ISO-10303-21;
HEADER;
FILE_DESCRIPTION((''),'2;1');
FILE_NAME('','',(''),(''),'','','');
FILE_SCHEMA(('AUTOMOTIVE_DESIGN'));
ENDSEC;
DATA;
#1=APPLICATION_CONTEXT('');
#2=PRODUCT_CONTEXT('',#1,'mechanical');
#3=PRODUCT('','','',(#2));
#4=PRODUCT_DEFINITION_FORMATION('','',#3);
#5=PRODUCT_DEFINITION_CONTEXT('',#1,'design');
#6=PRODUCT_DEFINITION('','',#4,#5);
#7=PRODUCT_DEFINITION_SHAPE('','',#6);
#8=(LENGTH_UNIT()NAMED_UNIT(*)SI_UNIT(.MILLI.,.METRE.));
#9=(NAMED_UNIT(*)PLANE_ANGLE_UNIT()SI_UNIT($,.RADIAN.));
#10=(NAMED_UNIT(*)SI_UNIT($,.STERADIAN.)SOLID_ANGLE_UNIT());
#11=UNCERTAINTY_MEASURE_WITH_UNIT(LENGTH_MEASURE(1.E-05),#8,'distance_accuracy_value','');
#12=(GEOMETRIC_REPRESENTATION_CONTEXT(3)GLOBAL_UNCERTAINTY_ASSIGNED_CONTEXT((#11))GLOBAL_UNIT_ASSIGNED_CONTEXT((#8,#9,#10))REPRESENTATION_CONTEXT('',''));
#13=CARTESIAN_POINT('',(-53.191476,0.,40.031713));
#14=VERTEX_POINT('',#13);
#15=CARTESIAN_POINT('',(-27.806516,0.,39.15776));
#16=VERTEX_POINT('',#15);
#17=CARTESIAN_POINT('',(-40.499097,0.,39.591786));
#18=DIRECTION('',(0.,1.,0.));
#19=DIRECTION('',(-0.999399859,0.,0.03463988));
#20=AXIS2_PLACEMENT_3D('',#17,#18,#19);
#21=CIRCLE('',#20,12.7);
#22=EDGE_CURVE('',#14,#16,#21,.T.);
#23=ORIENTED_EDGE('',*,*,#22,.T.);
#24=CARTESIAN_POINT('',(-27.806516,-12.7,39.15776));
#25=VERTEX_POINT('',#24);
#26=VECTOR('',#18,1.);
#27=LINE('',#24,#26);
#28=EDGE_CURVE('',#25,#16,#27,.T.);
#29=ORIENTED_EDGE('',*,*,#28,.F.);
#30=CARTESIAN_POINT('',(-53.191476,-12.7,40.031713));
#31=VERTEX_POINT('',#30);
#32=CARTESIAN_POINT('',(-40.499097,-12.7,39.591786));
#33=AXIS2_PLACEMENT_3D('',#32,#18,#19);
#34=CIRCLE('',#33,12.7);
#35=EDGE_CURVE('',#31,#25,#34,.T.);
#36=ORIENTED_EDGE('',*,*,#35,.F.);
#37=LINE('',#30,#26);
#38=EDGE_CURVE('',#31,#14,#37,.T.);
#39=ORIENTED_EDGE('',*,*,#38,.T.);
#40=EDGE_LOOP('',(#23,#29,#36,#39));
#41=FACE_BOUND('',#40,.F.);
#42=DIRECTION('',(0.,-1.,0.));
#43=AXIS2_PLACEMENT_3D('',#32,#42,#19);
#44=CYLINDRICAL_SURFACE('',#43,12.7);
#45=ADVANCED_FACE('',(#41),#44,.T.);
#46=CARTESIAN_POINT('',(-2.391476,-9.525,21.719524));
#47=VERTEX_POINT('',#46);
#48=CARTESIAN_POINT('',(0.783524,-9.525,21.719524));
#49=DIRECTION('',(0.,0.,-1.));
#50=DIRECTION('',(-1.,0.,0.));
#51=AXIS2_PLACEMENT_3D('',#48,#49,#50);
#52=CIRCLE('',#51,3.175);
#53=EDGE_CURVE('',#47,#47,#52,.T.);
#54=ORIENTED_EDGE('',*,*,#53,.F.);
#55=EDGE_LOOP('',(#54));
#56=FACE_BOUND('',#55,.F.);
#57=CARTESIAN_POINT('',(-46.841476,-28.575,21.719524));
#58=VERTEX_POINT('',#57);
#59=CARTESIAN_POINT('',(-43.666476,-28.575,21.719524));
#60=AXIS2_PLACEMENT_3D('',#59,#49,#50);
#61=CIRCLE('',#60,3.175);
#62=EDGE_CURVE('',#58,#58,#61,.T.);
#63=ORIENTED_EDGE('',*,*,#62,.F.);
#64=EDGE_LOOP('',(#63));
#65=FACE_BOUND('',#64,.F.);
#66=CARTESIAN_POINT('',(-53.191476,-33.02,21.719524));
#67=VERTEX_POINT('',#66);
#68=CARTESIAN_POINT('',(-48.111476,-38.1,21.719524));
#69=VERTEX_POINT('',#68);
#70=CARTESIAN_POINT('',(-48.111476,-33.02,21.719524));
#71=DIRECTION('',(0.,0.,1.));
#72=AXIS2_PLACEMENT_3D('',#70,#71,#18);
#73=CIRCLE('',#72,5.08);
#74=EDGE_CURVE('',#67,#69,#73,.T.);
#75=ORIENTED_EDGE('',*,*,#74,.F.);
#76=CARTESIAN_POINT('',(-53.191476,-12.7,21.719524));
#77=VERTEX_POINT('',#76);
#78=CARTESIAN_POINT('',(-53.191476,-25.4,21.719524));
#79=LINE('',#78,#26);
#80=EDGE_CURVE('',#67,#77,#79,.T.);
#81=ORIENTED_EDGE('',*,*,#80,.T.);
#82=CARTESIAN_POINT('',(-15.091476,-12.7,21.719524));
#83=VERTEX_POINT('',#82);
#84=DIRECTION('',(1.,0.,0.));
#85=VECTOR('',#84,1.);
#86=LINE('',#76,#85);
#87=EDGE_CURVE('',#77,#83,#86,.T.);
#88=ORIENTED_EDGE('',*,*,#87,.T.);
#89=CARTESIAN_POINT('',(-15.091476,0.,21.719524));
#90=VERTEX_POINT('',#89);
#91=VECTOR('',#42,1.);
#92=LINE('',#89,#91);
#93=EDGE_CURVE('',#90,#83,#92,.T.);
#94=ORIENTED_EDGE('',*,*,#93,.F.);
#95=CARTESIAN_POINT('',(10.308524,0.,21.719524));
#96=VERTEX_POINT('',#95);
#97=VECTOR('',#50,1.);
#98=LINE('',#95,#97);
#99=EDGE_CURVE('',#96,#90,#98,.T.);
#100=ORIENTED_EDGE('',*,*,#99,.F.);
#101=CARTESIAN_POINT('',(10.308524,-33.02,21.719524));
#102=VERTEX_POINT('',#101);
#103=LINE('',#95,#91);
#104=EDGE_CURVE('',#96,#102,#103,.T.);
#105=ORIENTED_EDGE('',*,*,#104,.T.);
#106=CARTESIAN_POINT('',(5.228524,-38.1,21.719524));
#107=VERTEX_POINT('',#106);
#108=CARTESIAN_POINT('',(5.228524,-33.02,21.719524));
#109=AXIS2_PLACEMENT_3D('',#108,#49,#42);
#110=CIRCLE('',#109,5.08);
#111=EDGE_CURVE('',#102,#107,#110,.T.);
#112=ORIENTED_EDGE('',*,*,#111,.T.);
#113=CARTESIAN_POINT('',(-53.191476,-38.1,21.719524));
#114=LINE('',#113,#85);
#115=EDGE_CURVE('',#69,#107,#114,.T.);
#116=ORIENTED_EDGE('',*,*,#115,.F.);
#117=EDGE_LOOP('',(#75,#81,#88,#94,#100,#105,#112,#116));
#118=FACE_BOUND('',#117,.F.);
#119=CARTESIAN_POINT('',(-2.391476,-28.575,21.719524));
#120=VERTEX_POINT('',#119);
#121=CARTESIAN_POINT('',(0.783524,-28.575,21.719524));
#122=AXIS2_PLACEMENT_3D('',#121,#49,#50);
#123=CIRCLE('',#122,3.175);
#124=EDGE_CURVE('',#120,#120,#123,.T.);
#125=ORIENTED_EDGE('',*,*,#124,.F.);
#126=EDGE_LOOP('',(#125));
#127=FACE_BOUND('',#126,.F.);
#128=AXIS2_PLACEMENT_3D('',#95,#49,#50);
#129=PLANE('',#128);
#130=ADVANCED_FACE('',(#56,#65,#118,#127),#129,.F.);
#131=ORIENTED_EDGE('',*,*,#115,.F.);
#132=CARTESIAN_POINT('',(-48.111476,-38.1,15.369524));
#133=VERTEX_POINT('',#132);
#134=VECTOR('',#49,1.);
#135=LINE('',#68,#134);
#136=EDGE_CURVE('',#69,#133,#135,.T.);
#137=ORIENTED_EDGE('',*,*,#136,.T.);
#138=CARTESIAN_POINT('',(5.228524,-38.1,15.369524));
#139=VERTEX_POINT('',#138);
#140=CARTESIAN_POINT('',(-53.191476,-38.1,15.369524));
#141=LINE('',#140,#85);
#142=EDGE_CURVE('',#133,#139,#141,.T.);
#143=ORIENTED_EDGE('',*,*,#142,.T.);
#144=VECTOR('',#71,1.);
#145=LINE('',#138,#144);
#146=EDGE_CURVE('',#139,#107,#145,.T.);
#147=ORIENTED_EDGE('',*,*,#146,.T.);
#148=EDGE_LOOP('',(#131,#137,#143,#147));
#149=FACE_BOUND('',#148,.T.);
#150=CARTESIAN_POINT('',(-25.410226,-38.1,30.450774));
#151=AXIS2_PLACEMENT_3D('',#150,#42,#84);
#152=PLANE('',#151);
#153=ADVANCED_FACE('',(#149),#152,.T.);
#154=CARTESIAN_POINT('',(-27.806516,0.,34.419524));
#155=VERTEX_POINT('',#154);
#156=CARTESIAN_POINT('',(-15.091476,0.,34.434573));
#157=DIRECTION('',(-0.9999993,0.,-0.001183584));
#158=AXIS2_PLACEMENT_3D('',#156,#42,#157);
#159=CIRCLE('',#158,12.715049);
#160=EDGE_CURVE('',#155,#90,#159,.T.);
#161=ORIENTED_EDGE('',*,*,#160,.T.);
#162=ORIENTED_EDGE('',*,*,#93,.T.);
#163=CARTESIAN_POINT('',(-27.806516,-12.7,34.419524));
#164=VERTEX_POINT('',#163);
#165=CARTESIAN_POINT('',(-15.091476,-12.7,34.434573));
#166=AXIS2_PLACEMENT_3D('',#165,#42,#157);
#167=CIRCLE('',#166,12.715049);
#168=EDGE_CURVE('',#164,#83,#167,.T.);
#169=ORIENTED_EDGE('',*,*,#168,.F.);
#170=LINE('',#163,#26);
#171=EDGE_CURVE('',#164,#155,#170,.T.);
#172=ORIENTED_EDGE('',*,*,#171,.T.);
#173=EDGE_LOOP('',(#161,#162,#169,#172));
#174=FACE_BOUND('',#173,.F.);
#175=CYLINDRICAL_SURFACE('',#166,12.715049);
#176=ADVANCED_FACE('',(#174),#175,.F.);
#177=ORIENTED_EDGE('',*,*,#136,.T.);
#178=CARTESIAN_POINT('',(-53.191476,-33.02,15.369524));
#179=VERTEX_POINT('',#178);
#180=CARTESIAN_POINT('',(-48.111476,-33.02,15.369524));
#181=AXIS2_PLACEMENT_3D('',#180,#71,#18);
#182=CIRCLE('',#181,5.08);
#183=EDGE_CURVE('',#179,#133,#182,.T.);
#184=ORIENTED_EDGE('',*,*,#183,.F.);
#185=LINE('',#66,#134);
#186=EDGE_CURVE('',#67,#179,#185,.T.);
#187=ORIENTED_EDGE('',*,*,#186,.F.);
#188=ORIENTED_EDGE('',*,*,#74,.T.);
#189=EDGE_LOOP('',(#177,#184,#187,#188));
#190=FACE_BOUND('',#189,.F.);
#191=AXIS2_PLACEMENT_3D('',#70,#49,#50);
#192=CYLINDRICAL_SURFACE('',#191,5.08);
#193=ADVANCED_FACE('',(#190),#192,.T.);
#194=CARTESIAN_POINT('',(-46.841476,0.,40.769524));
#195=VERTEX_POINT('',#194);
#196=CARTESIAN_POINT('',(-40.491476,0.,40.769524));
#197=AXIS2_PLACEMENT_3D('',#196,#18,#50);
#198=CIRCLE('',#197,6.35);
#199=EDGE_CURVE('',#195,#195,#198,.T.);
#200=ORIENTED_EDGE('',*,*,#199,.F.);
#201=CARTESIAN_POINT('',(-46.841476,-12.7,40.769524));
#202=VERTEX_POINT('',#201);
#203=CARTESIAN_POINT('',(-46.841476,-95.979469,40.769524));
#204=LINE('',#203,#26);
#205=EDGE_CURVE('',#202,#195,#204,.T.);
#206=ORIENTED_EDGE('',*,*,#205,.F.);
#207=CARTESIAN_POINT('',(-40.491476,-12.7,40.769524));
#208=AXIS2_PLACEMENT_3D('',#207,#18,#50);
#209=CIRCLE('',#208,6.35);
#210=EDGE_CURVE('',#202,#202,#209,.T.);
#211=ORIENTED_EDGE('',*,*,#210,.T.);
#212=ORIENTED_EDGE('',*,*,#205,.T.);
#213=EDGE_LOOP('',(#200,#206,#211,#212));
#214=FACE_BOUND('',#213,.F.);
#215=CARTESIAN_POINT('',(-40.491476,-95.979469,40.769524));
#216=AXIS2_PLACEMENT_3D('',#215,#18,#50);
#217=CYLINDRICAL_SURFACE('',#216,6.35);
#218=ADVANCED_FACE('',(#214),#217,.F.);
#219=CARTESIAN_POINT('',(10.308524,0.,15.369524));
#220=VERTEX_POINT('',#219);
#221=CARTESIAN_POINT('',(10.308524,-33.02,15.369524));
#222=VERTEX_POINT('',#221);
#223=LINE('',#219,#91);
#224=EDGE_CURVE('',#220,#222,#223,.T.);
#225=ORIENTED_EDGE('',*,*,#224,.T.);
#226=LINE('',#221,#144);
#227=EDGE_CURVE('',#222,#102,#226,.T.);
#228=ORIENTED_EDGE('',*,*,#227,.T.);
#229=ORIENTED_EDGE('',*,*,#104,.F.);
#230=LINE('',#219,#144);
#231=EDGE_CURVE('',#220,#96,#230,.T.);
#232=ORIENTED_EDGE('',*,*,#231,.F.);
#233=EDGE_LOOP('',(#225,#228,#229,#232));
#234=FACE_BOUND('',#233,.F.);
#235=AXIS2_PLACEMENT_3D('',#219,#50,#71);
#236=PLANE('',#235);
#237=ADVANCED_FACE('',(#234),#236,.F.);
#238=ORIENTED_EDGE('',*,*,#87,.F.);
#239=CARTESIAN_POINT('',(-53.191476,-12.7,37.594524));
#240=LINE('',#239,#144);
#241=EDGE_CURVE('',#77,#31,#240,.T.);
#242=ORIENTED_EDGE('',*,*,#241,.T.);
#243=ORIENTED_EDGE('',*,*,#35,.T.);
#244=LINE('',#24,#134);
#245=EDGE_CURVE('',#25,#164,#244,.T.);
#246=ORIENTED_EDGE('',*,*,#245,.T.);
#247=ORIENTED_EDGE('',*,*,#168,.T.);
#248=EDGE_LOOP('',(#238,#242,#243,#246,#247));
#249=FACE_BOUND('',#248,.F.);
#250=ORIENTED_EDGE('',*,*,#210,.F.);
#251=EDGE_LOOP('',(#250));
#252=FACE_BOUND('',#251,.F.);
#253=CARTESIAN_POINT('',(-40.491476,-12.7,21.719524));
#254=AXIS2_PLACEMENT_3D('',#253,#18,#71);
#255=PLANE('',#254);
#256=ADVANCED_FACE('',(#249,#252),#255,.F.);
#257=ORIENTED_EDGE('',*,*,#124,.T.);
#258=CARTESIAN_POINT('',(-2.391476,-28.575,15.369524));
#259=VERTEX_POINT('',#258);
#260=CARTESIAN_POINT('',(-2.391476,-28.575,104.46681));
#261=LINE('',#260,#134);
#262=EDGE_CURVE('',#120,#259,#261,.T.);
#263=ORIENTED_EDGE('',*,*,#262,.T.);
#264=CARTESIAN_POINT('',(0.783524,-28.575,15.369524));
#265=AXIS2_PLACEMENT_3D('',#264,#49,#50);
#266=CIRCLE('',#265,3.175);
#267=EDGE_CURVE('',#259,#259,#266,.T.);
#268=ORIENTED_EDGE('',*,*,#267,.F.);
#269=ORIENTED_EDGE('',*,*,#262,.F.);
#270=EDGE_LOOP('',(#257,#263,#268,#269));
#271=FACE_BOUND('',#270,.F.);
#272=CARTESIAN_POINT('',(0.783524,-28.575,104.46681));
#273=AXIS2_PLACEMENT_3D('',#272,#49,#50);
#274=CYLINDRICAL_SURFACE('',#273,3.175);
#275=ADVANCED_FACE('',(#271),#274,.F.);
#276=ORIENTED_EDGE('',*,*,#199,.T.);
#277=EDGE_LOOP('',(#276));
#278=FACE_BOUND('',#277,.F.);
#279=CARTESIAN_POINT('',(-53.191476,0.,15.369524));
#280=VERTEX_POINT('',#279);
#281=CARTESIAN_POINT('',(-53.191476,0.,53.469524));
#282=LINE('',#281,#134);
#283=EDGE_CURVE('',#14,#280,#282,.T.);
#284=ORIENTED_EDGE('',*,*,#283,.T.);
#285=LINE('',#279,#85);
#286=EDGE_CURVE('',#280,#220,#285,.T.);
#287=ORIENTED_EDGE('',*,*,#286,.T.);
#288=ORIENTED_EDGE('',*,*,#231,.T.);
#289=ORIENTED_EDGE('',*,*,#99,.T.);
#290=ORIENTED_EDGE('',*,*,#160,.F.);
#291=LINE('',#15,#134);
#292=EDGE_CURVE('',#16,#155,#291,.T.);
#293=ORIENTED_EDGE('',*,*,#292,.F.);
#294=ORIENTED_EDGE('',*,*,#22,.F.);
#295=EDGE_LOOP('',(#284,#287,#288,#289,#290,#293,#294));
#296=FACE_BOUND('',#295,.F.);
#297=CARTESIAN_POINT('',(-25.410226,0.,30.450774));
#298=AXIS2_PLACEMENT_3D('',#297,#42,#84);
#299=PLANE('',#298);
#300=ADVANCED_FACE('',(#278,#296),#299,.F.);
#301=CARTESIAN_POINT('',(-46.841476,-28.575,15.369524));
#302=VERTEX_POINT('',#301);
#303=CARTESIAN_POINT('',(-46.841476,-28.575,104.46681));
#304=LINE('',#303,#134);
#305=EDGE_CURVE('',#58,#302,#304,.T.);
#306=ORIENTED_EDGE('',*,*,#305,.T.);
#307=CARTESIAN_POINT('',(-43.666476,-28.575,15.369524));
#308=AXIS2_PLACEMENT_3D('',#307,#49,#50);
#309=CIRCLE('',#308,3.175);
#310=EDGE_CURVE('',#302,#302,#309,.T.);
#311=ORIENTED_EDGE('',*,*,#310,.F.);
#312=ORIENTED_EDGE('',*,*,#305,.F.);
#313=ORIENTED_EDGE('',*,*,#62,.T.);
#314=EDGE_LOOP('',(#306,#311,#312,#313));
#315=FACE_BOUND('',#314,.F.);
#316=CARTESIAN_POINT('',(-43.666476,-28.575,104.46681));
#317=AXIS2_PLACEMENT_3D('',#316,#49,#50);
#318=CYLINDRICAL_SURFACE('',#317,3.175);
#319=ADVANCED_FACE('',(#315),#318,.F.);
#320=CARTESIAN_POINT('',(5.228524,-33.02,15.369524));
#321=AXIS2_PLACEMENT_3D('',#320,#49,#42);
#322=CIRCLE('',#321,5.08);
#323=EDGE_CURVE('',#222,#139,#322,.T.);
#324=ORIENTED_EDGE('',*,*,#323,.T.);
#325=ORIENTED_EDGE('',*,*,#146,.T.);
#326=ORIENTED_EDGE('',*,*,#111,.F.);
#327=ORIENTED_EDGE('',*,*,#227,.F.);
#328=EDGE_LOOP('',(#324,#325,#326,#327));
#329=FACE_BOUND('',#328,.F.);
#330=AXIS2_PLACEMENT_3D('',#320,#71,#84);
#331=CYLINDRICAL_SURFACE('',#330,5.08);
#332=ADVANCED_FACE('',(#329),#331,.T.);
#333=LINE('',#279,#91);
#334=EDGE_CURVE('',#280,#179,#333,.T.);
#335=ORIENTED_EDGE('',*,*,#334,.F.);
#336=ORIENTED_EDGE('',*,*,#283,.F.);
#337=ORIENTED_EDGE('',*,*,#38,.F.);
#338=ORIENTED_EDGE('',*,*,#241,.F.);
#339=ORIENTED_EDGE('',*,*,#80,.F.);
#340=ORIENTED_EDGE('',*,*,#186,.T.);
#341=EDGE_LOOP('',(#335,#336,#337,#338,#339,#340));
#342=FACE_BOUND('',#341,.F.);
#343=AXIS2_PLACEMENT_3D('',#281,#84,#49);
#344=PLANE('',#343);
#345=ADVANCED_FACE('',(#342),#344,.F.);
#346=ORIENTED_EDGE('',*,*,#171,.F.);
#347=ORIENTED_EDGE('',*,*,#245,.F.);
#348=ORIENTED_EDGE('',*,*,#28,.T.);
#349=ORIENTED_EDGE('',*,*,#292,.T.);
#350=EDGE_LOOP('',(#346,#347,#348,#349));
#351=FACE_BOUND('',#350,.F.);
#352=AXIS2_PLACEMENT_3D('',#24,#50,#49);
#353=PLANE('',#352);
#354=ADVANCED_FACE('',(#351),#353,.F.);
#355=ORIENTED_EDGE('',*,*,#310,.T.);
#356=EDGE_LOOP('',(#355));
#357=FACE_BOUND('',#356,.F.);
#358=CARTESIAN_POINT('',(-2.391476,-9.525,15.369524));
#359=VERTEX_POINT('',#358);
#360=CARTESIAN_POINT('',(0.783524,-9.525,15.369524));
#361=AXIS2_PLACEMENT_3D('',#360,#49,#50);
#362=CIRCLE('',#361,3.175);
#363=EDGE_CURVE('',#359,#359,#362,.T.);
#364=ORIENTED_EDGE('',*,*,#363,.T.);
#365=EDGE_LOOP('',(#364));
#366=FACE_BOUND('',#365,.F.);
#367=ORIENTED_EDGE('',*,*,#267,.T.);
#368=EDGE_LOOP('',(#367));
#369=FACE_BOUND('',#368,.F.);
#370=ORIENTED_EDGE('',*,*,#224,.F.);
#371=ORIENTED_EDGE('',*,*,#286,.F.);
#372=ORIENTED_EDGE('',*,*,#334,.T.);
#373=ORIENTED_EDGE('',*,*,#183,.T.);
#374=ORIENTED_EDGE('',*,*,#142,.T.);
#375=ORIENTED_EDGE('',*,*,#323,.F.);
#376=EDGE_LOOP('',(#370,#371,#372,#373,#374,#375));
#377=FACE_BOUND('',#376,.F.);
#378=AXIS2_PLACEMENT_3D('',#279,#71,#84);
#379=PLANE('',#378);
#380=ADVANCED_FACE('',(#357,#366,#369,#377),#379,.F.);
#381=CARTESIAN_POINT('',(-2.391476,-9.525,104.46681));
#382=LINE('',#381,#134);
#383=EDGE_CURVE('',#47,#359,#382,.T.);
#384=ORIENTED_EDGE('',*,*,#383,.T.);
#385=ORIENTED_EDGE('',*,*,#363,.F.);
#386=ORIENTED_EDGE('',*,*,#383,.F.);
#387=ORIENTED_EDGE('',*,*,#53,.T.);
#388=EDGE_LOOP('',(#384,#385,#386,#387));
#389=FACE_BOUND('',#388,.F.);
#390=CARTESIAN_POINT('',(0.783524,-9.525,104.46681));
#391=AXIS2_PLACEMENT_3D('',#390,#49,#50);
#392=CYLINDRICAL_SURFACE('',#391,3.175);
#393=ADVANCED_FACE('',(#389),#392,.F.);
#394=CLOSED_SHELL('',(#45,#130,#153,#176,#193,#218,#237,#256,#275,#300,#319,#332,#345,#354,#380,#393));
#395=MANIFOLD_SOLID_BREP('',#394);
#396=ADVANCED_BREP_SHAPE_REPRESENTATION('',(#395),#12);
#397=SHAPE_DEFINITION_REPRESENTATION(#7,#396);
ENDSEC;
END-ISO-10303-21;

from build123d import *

# Parameters (mm, degrees)
F2_DEPTH  = 38.1
F3_W      = 25.4
F3_H      = 31.75
F4_DEPTH  = 25.4
F5_DEPTH  = 12.7
F7_D      = 12.7
F9_DEPTH  = 12.7
F10_DEPTH = 123
F11_R     = 5.08
F13_D     = 6.35
F15_D     = 6.35
F17_D     = 6.35


# Not quite as in the source:
# - an extrude ends at something that could not be found from the text; its depth is read off the source's solid


with BuildPart() as f2:
    # F0 (on Front) → F2 (new body)
    with BuildSketch(Plane.XZ):
        Polygon((-15.0914756011, 53.4695235106), (-53.1914756011, 53.4695235106), (-53.1914756011, 15.3695235106), (10.3085243989, 15.3695235106), (10.3085243989, 21.7195235106), (-15.0914756011, 21.7195235106), align=None)
    extrude(amount=F2_DEPTH)

    # F3 (on face) → F4 (cut)
    with BuildSketch(Plane.YZ.offset(-15.0914756011)):
        with Locations((-25.4, 37.5945235106)):
            Rectangle(F3_W, F3_H)
    extrude(amount=-F4_DEPTH, mode=Mode.SUBTRACT)

    # F5 (cut): a face of the model
    f5_faces = [f2.faces().sort_by_distance(p)[0] for p in [
        (-40.4914756011, -25.4, 37.5945235106),
    ]]
    extrude(f5_faces, amount=-F5_DEPTH, mode=Mode.SUBTRACT)

    # F7 (through all)
    with Locations(Plane.XZ.offset(12.7)):
        with Locations((-40.4914756011, 40.7695235106)):
            Hole(F7_D / 2)

    # F8 (on face) → F9 (cut)
    with BuildSketch(Plane.XZ.offset(12.7)):
        with BuildLine():
            ThreePointArc((-53.1914756011, 40.0317125094), (-40.0621213537, 52.2842661721), (-27.8065160195, 39.1577604642))
            Line((-27.8065160195, 39.1577604642), (-27.8065160195, 34.4195235106))
            ThreePointArc((-27.8065160195, 34.4195235106), (-24.0770508865, 25.4383560684), (-15.0914756011, 21.7195235106))
            Line((-15.0914756011, 21.7195235106), (-15.0914756011, 53.4695235106))
            Line((-15.0914756011, 53.4695235106), (-53.1914756011, 53.4695235106))
            Line((-53.1914756011, 53.4695235106), (-53.1914756011, 40.0317125094))
        make_face()
    extrude(amount=-F9_DEPTH, mode=Mode.SUBTRACT)

    # F1 (on face) → F10 (cut, through all)
    with BuildSketch(Plane.XZ):
        Polygon((-15.0914756011, 21.7195235106), (-15.0914756011, 53.4695235106), (-53.1914756011, 53.4695235106), (-53.1914756011, 15.3695235106), (10.3085243989, 15.3695235106), (10.3085243989, 21.7195235106), align=None)
    extrude(amount=-F10_DEPTH, mode=Mode.SUBTRACT)

    # F11
    f11_edges = [f2.edges().sort_by_distance(p)[0] for p in [
        (-53.191476, -38.1, 18.544524),
        (10.308524, -38.1, 18.544524),
    ]]
    fillet(f11_edges, radius=F11_R)

    # F13 (through all)
    with Locations(Plane.XY.offset(21.7195235106)):
        with Locations((-43.6664756011, -28.575)):
            Hole(F13_D / 2)

    # F15 (through all)
    with Locations(Plane.XY.offset(21.7195235106)):
        with Locations((0.7835243989, -9.525)):
            Hole(F15_D / 2)

    # F17 (through all)
    with Locations(Plane.XY.offset(21.7195235106)):
        with Locations((0.7835243989, -28.575)):
            Hole(F17_D / 2)


solid = f2.part
